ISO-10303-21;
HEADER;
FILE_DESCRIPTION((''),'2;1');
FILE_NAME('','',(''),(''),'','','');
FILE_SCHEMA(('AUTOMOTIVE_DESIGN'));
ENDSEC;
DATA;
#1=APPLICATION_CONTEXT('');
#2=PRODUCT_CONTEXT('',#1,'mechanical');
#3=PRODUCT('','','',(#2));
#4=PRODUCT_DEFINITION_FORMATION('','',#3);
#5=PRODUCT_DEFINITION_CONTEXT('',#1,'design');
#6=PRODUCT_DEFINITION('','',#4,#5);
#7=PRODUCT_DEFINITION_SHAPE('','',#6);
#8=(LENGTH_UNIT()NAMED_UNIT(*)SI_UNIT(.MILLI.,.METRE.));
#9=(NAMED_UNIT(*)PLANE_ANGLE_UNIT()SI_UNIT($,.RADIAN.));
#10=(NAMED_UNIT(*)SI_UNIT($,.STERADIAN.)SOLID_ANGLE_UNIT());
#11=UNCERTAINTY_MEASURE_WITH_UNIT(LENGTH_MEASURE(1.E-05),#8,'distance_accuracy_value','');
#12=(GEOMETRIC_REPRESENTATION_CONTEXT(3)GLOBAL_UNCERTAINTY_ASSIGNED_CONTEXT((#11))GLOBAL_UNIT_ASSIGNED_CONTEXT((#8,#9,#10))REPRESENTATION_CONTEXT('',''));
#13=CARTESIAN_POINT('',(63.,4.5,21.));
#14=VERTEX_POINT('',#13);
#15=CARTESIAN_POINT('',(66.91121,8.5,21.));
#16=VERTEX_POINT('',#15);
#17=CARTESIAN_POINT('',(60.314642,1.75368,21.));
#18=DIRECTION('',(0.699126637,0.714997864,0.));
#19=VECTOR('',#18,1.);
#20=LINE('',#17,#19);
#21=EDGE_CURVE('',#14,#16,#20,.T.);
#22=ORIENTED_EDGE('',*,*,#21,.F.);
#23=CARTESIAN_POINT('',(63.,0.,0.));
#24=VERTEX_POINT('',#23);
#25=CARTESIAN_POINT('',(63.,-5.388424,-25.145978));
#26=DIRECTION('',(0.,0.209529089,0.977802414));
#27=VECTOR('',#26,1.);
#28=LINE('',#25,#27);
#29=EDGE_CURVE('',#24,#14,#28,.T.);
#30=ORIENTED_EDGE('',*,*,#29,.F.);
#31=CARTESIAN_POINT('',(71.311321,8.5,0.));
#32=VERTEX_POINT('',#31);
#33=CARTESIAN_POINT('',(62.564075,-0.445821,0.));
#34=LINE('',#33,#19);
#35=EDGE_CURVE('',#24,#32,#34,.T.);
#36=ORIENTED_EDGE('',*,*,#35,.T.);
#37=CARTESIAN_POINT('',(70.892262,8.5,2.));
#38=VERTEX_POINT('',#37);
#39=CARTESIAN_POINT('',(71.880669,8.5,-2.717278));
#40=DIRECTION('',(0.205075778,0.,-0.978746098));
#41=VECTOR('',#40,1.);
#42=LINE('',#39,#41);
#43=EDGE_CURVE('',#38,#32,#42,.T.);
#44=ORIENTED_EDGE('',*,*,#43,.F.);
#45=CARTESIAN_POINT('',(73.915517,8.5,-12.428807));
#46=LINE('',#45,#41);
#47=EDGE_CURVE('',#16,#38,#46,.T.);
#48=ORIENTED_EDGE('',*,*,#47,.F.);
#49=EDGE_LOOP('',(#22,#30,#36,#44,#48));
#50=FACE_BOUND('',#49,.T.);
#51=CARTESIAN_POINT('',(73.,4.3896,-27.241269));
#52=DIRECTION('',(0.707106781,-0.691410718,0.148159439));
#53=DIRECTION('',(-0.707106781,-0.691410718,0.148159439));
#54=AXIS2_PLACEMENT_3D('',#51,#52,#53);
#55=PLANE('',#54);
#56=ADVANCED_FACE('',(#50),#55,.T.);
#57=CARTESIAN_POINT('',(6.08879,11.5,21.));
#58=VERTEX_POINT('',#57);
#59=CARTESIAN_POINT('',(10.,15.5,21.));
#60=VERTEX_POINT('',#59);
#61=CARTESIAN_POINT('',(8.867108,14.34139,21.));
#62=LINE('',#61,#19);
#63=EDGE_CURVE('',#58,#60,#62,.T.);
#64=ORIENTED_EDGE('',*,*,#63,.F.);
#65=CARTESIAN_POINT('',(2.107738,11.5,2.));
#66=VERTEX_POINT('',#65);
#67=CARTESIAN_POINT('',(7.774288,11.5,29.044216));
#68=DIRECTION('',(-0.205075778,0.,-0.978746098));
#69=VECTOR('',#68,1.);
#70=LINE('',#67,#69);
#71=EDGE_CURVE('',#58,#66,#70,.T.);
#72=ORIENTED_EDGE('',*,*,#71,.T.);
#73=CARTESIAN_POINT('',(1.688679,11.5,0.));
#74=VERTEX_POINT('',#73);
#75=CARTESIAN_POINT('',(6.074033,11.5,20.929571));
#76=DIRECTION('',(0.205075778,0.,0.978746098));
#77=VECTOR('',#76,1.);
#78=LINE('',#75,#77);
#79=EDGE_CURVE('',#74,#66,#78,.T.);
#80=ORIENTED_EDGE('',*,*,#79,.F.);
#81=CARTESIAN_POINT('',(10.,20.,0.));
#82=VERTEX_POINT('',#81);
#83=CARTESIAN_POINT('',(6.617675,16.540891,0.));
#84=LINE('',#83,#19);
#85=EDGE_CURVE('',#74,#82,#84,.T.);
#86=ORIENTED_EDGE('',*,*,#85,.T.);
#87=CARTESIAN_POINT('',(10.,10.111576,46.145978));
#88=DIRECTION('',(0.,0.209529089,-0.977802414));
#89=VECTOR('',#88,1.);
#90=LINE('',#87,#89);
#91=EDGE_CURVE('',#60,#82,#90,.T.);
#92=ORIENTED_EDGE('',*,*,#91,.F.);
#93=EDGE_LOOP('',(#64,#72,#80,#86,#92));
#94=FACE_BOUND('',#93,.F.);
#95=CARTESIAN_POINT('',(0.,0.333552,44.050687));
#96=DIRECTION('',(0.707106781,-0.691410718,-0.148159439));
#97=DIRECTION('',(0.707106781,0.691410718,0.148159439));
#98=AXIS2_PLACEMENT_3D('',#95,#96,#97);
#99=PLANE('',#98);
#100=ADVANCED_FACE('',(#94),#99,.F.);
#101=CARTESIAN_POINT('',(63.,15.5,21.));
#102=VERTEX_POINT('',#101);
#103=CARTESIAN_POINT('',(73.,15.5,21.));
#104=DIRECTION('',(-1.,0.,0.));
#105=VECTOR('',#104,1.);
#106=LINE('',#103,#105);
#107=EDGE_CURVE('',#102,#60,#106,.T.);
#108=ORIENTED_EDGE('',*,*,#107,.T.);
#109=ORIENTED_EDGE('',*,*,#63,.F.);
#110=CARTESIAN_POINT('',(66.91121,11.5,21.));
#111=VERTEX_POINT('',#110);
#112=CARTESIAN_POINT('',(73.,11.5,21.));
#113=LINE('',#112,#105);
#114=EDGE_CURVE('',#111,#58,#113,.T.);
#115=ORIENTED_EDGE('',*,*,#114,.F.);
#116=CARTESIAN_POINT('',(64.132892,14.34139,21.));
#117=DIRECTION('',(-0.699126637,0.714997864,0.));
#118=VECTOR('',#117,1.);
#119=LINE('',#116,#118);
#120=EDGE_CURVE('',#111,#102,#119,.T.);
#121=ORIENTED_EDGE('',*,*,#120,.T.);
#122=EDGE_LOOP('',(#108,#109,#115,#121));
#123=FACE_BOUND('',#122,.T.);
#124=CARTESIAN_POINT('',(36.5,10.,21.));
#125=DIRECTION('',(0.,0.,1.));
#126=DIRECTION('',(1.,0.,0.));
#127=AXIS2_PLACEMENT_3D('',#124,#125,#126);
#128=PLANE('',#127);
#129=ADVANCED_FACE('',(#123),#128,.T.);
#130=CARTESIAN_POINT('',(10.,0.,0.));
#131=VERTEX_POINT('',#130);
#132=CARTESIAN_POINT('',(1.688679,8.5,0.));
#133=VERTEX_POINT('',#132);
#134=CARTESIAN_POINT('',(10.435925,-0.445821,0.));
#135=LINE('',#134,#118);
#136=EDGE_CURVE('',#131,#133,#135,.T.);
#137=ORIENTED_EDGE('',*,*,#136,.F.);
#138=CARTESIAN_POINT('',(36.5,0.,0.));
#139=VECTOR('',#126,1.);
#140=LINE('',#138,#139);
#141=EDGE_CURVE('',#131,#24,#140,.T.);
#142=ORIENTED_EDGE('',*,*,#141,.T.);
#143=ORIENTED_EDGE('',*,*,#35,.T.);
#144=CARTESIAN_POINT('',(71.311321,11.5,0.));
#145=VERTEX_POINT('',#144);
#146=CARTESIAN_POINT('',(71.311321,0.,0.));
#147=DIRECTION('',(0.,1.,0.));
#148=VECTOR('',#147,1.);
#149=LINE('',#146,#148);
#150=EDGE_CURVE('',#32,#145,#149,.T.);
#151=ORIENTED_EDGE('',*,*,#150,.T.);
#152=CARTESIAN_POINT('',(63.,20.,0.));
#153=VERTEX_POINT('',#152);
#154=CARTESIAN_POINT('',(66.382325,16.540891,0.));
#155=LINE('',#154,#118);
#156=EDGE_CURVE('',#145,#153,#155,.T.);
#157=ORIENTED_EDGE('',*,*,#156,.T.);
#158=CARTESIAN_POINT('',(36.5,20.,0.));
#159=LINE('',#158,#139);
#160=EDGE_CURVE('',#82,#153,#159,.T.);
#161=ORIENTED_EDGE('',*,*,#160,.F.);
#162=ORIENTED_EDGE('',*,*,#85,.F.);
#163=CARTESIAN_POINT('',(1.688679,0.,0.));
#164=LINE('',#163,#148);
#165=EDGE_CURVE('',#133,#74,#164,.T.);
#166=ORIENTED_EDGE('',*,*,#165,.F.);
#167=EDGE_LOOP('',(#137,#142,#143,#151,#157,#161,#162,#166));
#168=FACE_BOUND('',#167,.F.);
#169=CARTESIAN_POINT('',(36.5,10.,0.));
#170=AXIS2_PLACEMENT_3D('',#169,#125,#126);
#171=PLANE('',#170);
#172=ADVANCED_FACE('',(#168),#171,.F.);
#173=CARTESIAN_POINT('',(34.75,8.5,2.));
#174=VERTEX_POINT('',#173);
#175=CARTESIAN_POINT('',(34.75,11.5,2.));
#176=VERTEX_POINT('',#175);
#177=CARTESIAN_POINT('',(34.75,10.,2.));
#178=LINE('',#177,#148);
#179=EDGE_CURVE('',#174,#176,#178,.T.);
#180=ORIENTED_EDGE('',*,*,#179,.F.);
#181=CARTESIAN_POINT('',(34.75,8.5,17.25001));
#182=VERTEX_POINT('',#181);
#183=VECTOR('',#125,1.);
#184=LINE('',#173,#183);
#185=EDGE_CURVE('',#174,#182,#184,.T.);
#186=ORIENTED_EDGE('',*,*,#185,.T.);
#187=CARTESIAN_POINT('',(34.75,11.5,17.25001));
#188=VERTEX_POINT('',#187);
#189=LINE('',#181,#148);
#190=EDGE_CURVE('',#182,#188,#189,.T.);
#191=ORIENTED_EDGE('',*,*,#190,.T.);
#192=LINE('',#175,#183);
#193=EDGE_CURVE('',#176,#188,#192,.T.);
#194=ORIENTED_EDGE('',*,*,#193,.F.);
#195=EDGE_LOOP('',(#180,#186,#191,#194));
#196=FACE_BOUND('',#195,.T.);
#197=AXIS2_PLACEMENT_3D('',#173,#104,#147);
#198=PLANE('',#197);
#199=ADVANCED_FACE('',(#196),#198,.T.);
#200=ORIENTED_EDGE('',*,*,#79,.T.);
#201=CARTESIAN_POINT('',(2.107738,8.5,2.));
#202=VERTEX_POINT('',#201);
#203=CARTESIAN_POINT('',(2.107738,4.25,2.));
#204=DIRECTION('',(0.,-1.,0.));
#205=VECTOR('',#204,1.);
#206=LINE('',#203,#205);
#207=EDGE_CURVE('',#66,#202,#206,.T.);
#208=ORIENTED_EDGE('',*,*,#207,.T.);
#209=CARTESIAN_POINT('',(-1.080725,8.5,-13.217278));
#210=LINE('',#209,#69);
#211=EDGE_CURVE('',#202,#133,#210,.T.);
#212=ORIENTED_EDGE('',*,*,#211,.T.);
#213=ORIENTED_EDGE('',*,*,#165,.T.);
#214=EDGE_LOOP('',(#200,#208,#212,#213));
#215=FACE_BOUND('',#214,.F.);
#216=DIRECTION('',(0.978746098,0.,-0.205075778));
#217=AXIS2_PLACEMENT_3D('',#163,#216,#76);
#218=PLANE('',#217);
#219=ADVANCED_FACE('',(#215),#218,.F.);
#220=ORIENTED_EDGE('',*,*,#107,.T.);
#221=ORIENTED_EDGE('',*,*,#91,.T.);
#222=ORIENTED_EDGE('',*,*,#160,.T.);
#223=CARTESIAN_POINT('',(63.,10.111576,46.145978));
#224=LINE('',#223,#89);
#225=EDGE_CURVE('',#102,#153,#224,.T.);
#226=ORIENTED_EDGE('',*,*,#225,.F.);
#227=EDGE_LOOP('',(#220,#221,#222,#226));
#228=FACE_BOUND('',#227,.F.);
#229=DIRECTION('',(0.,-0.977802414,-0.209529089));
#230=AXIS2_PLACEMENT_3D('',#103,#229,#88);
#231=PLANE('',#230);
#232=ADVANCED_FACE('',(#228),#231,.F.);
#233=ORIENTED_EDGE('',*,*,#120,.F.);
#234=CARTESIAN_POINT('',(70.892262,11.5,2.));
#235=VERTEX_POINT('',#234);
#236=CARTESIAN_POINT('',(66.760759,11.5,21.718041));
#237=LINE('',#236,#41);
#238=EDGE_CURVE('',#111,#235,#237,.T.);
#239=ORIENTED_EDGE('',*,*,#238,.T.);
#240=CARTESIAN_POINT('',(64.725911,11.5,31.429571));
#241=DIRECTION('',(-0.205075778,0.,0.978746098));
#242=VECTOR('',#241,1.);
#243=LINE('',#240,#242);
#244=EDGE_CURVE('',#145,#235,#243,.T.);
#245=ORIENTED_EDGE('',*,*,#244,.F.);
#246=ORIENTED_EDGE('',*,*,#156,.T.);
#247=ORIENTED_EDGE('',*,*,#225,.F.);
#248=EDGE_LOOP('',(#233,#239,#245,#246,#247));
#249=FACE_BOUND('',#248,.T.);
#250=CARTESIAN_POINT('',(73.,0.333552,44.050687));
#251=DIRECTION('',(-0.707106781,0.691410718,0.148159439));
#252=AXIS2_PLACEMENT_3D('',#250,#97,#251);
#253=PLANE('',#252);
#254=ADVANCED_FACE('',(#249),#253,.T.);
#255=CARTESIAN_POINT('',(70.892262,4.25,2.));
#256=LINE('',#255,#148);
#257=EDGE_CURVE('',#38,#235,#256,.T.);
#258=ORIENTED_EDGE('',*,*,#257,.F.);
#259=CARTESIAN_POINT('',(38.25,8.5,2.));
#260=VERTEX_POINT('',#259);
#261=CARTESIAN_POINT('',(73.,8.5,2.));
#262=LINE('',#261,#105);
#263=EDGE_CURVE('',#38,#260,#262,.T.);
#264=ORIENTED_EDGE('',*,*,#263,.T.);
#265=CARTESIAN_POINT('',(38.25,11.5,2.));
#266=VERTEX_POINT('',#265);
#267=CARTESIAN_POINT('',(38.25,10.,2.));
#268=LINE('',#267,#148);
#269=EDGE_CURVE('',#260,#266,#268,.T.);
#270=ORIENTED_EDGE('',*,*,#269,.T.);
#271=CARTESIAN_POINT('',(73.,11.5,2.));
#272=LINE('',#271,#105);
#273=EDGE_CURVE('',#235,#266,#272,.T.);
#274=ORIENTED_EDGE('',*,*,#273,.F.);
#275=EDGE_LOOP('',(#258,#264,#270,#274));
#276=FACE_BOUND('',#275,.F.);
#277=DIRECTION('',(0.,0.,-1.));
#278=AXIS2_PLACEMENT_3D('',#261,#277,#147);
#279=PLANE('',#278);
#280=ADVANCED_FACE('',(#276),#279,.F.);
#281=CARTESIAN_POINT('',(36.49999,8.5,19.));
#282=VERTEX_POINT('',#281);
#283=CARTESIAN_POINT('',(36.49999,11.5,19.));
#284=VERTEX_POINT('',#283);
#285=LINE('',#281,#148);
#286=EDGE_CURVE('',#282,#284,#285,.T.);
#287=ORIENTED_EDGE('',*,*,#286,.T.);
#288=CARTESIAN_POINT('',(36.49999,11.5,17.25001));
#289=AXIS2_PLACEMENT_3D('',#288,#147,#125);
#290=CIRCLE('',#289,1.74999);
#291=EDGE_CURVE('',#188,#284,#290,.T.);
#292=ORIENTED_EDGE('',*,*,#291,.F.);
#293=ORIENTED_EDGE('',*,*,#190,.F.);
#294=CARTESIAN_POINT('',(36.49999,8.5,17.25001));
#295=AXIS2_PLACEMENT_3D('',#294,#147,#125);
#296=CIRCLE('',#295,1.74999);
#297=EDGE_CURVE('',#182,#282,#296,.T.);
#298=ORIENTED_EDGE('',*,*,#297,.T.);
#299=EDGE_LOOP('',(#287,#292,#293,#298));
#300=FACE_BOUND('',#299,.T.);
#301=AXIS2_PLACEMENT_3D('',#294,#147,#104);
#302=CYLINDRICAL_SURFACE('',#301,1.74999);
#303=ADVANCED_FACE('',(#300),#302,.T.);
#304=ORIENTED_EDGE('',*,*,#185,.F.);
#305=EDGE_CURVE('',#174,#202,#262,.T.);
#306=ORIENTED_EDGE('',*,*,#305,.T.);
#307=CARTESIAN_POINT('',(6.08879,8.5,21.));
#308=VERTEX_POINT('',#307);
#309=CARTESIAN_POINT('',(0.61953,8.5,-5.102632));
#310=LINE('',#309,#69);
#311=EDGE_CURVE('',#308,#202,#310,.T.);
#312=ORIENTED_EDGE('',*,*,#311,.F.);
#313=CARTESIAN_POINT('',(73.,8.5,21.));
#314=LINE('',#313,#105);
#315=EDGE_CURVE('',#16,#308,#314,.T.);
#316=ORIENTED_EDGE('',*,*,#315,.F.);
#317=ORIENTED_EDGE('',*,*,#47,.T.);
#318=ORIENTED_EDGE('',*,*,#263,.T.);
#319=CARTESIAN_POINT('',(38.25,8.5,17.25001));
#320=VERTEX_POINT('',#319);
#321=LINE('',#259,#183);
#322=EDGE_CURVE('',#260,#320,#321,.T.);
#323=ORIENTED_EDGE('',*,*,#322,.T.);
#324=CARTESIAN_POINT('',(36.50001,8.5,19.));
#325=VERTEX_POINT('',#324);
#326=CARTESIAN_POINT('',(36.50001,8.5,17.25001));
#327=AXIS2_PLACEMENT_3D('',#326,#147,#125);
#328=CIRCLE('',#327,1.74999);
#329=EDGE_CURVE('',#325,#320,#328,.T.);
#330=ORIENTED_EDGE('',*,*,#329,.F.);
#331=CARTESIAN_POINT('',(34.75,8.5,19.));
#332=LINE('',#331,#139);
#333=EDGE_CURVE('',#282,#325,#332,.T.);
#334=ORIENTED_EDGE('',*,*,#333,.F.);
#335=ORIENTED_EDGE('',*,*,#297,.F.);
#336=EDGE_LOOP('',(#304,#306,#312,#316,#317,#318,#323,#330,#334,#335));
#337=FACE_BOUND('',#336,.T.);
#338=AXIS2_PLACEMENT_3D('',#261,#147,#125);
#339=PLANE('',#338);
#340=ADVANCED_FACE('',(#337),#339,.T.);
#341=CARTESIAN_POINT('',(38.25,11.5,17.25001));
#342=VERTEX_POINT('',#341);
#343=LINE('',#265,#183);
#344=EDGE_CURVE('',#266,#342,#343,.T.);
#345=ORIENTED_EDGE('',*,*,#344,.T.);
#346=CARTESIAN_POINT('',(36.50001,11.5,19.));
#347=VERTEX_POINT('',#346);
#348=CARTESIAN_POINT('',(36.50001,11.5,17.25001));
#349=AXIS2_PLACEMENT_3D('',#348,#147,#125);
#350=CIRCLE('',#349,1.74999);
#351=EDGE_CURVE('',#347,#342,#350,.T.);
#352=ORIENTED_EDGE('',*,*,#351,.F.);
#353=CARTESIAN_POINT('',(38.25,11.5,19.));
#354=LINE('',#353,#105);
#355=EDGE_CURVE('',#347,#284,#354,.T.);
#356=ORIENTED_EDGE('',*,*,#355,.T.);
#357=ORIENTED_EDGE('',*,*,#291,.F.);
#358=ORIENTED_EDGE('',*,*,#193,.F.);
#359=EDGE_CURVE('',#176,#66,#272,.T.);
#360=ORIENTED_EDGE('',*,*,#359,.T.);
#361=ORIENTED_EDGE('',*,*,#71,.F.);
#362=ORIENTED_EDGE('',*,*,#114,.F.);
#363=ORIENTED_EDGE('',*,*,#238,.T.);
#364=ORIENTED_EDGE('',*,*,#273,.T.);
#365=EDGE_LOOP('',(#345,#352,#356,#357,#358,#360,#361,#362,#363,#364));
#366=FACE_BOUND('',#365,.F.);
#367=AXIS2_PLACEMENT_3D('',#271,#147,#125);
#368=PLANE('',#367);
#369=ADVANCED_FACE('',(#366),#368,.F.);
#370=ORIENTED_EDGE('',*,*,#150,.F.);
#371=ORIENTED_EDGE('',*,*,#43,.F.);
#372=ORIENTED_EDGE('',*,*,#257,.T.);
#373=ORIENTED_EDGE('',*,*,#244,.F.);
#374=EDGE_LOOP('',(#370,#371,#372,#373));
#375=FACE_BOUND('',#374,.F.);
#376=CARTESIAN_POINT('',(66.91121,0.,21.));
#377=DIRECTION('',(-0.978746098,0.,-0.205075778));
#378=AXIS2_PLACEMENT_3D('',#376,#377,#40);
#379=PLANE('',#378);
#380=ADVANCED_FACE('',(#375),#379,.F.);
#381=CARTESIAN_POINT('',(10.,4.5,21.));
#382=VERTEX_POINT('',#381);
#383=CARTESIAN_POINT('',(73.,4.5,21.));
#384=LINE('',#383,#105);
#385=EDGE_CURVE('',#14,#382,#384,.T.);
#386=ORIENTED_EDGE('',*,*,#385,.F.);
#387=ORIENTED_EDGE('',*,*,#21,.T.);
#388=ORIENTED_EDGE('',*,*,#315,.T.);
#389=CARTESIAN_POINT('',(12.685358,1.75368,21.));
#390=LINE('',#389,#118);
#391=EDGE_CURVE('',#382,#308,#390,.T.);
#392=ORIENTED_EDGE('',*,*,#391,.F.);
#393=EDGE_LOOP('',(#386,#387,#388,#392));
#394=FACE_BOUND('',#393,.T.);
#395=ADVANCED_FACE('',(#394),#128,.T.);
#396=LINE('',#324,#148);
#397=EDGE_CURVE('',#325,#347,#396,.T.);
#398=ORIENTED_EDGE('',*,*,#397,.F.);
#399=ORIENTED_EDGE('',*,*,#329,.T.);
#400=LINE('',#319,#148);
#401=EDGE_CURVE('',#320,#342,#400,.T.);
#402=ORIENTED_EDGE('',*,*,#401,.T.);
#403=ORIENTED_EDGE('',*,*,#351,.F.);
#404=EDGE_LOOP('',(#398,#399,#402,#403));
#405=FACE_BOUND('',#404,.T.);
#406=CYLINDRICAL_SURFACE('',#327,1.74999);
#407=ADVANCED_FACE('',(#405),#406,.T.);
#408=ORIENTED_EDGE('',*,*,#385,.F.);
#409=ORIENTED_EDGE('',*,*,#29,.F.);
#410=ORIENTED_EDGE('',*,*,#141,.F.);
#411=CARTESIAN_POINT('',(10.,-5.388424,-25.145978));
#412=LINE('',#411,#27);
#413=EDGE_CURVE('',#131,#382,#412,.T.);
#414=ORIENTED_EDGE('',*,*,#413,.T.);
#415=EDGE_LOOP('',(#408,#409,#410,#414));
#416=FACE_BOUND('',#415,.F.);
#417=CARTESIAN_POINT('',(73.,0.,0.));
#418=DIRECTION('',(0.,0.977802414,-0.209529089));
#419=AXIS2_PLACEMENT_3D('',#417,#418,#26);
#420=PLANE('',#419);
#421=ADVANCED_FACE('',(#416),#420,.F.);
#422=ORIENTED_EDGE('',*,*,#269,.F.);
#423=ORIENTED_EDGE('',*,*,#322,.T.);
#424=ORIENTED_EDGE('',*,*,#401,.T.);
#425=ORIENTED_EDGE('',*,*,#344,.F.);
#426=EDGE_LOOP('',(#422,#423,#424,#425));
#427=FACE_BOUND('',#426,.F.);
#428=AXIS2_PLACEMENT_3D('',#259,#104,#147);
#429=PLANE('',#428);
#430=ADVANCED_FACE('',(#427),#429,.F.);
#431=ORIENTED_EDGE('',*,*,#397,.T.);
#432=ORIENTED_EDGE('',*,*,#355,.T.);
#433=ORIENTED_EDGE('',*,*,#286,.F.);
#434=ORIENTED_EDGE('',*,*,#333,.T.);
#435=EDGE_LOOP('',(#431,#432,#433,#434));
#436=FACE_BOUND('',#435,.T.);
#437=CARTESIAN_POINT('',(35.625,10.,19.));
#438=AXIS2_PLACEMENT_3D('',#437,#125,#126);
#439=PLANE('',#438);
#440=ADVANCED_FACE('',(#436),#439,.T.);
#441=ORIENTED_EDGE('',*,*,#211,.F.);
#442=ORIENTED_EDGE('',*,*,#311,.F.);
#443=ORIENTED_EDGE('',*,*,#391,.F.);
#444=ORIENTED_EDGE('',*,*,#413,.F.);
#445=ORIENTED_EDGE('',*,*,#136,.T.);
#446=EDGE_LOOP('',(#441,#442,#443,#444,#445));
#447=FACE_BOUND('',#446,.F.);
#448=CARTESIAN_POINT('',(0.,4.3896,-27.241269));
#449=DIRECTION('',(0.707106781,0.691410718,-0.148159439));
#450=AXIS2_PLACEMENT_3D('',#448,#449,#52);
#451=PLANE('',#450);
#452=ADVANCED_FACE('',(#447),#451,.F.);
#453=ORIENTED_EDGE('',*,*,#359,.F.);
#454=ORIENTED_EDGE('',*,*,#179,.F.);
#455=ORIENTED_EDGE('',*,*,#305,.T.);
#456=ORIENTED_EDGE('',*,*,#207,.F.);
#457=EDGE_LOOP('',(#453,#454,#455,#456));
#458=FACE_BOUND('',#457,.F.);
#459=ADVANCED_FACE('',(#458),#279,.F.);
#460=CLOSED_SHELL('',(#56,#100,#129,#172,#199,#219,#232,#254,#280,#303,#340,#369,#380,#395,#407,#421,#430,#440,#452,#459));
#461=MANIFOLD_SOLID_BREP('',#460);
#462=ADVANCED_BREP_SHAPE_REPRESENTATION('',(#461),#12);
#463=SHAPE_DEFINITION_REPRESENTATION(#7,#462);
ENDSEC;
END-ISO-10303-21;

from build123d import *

# Parameters (mm, degrees)
F0_W        = 73
F0_H        = 20
F1_DEPTH    = 21
F2_W        = 3
F2_H        = 19
F3_DEPTH    = 73.001
F4_W        = 1.75
F4_H        = 3
F5_DEPTH    = 17
F6_R        = 1.74999
F7_T1_DEPTH = 72.9103913542
F7_T3_DEPTH = 72.9103913542
F9_DEPTH    = 20.001


# Not quite as in the source:
# - a fillet or chamfer that OpenCascade refuses, or shapes differently, is made with other operations: its cross-section is extruded or revolved along the edge and cut away or added
# - a fillet or chamfer is up to 0.001 mm smaller than in the source, because OpenCascade refuses the exact size


with BuildPart() as f1:
    # F0 (on Top) → F1 (new body)
    with BuildSketch(Plane.XY):
        with Locations((36.5, 10)):
            Rectangle(F0_W, F0_H)
    extrude(amount=F1_DEPTH)

    # F2 (on face) → F3 (cut, through all)
    with BuildSketch(Plane.YZ.offset(73)):
        Polygon((20, 21), (15.5, 21), (20, 0), align=None)
        with Locations((10, 11.5)):
            Rectangle(F2_W, F2_H)
        Polygon((4.5, 21), (0, 21), (0, 0), align=None)
    extrude(amount=-F3_DEPTH, mode=Mode.SUBTRACT)

    # F4 (on face) → F5 (join)
    with BuildSketch(Plane.XY.offset(2)):
        with Locations((35.625, 10)):
            Rectangle(F4_W, F4_H)
        with Locations((37.375, 10)):
            Rectangle(F4_W, F4_H)
    extrude(amount=F5_DEPTH)

    # F6 (radius 1.75 in the source; OpenCascade refuses exactly that, so slightly less here)
    f6_edges = [f1.edges().sort_by_distance(p)[0] for p in [
        (38.25, 10, 19),
        (34.75, 10, 19),
    ]]
    fillet(f6_edges, radius=F6_R)

    # F7: chamfer of 10 on 4 edges, made by hand

    # F7_s2 → F7_t1 (cut)
    with BuildSketch(Plane(origin=(0, -9.0103751492, 42.0484173631), x_dir=(1, 0, 0), z_dir=(0, 0.2095290887, -0.9778024141))):
        Polygon((73, -9.5560482815), (63, -19.5560482815), (73, -19.5560482815), align=None)
        Polygon((0, -9.5560482815), (10, -19.5560482815), (0, -19.5560482815), align=None)
    extrude(amount=F7_T1_DEPTH, mode=Mode.SUBTRACT)

    # F7_s4 → F7_t3 (cut)
    with BuildSketch(Plane(origin=(0, -5.3884239297, -25.1459783387), x_dir=(1, 0, 0), z_dir=(0, 0.2095290887, 0.9778024141))):
        Polygon((73, 10), (63, 0), (73, 0), align=None)
        Polygon((0, 10), (10, 0), (0, 0), align=None)
    extrude(amount=F7_T3_DEPTH, mode=Mode.SUBTRACT)

    # F8 (on Front) → F9 (cut, through all)
    with BuildSketch(Plane.XZ):
        Polygon((1.6886794803, 0), (6.0887903437, 21), (0, 21), (0, 0), align=None)
        Polygon((72.7780241408, 21), (66.9112096563, 21), (71.3113205197, 0), (72.7780241408, 0), align=None)
    extrude(amount=-F9_DEPTH, mode=Mode.SUBTRACT)


solid = f1.part
